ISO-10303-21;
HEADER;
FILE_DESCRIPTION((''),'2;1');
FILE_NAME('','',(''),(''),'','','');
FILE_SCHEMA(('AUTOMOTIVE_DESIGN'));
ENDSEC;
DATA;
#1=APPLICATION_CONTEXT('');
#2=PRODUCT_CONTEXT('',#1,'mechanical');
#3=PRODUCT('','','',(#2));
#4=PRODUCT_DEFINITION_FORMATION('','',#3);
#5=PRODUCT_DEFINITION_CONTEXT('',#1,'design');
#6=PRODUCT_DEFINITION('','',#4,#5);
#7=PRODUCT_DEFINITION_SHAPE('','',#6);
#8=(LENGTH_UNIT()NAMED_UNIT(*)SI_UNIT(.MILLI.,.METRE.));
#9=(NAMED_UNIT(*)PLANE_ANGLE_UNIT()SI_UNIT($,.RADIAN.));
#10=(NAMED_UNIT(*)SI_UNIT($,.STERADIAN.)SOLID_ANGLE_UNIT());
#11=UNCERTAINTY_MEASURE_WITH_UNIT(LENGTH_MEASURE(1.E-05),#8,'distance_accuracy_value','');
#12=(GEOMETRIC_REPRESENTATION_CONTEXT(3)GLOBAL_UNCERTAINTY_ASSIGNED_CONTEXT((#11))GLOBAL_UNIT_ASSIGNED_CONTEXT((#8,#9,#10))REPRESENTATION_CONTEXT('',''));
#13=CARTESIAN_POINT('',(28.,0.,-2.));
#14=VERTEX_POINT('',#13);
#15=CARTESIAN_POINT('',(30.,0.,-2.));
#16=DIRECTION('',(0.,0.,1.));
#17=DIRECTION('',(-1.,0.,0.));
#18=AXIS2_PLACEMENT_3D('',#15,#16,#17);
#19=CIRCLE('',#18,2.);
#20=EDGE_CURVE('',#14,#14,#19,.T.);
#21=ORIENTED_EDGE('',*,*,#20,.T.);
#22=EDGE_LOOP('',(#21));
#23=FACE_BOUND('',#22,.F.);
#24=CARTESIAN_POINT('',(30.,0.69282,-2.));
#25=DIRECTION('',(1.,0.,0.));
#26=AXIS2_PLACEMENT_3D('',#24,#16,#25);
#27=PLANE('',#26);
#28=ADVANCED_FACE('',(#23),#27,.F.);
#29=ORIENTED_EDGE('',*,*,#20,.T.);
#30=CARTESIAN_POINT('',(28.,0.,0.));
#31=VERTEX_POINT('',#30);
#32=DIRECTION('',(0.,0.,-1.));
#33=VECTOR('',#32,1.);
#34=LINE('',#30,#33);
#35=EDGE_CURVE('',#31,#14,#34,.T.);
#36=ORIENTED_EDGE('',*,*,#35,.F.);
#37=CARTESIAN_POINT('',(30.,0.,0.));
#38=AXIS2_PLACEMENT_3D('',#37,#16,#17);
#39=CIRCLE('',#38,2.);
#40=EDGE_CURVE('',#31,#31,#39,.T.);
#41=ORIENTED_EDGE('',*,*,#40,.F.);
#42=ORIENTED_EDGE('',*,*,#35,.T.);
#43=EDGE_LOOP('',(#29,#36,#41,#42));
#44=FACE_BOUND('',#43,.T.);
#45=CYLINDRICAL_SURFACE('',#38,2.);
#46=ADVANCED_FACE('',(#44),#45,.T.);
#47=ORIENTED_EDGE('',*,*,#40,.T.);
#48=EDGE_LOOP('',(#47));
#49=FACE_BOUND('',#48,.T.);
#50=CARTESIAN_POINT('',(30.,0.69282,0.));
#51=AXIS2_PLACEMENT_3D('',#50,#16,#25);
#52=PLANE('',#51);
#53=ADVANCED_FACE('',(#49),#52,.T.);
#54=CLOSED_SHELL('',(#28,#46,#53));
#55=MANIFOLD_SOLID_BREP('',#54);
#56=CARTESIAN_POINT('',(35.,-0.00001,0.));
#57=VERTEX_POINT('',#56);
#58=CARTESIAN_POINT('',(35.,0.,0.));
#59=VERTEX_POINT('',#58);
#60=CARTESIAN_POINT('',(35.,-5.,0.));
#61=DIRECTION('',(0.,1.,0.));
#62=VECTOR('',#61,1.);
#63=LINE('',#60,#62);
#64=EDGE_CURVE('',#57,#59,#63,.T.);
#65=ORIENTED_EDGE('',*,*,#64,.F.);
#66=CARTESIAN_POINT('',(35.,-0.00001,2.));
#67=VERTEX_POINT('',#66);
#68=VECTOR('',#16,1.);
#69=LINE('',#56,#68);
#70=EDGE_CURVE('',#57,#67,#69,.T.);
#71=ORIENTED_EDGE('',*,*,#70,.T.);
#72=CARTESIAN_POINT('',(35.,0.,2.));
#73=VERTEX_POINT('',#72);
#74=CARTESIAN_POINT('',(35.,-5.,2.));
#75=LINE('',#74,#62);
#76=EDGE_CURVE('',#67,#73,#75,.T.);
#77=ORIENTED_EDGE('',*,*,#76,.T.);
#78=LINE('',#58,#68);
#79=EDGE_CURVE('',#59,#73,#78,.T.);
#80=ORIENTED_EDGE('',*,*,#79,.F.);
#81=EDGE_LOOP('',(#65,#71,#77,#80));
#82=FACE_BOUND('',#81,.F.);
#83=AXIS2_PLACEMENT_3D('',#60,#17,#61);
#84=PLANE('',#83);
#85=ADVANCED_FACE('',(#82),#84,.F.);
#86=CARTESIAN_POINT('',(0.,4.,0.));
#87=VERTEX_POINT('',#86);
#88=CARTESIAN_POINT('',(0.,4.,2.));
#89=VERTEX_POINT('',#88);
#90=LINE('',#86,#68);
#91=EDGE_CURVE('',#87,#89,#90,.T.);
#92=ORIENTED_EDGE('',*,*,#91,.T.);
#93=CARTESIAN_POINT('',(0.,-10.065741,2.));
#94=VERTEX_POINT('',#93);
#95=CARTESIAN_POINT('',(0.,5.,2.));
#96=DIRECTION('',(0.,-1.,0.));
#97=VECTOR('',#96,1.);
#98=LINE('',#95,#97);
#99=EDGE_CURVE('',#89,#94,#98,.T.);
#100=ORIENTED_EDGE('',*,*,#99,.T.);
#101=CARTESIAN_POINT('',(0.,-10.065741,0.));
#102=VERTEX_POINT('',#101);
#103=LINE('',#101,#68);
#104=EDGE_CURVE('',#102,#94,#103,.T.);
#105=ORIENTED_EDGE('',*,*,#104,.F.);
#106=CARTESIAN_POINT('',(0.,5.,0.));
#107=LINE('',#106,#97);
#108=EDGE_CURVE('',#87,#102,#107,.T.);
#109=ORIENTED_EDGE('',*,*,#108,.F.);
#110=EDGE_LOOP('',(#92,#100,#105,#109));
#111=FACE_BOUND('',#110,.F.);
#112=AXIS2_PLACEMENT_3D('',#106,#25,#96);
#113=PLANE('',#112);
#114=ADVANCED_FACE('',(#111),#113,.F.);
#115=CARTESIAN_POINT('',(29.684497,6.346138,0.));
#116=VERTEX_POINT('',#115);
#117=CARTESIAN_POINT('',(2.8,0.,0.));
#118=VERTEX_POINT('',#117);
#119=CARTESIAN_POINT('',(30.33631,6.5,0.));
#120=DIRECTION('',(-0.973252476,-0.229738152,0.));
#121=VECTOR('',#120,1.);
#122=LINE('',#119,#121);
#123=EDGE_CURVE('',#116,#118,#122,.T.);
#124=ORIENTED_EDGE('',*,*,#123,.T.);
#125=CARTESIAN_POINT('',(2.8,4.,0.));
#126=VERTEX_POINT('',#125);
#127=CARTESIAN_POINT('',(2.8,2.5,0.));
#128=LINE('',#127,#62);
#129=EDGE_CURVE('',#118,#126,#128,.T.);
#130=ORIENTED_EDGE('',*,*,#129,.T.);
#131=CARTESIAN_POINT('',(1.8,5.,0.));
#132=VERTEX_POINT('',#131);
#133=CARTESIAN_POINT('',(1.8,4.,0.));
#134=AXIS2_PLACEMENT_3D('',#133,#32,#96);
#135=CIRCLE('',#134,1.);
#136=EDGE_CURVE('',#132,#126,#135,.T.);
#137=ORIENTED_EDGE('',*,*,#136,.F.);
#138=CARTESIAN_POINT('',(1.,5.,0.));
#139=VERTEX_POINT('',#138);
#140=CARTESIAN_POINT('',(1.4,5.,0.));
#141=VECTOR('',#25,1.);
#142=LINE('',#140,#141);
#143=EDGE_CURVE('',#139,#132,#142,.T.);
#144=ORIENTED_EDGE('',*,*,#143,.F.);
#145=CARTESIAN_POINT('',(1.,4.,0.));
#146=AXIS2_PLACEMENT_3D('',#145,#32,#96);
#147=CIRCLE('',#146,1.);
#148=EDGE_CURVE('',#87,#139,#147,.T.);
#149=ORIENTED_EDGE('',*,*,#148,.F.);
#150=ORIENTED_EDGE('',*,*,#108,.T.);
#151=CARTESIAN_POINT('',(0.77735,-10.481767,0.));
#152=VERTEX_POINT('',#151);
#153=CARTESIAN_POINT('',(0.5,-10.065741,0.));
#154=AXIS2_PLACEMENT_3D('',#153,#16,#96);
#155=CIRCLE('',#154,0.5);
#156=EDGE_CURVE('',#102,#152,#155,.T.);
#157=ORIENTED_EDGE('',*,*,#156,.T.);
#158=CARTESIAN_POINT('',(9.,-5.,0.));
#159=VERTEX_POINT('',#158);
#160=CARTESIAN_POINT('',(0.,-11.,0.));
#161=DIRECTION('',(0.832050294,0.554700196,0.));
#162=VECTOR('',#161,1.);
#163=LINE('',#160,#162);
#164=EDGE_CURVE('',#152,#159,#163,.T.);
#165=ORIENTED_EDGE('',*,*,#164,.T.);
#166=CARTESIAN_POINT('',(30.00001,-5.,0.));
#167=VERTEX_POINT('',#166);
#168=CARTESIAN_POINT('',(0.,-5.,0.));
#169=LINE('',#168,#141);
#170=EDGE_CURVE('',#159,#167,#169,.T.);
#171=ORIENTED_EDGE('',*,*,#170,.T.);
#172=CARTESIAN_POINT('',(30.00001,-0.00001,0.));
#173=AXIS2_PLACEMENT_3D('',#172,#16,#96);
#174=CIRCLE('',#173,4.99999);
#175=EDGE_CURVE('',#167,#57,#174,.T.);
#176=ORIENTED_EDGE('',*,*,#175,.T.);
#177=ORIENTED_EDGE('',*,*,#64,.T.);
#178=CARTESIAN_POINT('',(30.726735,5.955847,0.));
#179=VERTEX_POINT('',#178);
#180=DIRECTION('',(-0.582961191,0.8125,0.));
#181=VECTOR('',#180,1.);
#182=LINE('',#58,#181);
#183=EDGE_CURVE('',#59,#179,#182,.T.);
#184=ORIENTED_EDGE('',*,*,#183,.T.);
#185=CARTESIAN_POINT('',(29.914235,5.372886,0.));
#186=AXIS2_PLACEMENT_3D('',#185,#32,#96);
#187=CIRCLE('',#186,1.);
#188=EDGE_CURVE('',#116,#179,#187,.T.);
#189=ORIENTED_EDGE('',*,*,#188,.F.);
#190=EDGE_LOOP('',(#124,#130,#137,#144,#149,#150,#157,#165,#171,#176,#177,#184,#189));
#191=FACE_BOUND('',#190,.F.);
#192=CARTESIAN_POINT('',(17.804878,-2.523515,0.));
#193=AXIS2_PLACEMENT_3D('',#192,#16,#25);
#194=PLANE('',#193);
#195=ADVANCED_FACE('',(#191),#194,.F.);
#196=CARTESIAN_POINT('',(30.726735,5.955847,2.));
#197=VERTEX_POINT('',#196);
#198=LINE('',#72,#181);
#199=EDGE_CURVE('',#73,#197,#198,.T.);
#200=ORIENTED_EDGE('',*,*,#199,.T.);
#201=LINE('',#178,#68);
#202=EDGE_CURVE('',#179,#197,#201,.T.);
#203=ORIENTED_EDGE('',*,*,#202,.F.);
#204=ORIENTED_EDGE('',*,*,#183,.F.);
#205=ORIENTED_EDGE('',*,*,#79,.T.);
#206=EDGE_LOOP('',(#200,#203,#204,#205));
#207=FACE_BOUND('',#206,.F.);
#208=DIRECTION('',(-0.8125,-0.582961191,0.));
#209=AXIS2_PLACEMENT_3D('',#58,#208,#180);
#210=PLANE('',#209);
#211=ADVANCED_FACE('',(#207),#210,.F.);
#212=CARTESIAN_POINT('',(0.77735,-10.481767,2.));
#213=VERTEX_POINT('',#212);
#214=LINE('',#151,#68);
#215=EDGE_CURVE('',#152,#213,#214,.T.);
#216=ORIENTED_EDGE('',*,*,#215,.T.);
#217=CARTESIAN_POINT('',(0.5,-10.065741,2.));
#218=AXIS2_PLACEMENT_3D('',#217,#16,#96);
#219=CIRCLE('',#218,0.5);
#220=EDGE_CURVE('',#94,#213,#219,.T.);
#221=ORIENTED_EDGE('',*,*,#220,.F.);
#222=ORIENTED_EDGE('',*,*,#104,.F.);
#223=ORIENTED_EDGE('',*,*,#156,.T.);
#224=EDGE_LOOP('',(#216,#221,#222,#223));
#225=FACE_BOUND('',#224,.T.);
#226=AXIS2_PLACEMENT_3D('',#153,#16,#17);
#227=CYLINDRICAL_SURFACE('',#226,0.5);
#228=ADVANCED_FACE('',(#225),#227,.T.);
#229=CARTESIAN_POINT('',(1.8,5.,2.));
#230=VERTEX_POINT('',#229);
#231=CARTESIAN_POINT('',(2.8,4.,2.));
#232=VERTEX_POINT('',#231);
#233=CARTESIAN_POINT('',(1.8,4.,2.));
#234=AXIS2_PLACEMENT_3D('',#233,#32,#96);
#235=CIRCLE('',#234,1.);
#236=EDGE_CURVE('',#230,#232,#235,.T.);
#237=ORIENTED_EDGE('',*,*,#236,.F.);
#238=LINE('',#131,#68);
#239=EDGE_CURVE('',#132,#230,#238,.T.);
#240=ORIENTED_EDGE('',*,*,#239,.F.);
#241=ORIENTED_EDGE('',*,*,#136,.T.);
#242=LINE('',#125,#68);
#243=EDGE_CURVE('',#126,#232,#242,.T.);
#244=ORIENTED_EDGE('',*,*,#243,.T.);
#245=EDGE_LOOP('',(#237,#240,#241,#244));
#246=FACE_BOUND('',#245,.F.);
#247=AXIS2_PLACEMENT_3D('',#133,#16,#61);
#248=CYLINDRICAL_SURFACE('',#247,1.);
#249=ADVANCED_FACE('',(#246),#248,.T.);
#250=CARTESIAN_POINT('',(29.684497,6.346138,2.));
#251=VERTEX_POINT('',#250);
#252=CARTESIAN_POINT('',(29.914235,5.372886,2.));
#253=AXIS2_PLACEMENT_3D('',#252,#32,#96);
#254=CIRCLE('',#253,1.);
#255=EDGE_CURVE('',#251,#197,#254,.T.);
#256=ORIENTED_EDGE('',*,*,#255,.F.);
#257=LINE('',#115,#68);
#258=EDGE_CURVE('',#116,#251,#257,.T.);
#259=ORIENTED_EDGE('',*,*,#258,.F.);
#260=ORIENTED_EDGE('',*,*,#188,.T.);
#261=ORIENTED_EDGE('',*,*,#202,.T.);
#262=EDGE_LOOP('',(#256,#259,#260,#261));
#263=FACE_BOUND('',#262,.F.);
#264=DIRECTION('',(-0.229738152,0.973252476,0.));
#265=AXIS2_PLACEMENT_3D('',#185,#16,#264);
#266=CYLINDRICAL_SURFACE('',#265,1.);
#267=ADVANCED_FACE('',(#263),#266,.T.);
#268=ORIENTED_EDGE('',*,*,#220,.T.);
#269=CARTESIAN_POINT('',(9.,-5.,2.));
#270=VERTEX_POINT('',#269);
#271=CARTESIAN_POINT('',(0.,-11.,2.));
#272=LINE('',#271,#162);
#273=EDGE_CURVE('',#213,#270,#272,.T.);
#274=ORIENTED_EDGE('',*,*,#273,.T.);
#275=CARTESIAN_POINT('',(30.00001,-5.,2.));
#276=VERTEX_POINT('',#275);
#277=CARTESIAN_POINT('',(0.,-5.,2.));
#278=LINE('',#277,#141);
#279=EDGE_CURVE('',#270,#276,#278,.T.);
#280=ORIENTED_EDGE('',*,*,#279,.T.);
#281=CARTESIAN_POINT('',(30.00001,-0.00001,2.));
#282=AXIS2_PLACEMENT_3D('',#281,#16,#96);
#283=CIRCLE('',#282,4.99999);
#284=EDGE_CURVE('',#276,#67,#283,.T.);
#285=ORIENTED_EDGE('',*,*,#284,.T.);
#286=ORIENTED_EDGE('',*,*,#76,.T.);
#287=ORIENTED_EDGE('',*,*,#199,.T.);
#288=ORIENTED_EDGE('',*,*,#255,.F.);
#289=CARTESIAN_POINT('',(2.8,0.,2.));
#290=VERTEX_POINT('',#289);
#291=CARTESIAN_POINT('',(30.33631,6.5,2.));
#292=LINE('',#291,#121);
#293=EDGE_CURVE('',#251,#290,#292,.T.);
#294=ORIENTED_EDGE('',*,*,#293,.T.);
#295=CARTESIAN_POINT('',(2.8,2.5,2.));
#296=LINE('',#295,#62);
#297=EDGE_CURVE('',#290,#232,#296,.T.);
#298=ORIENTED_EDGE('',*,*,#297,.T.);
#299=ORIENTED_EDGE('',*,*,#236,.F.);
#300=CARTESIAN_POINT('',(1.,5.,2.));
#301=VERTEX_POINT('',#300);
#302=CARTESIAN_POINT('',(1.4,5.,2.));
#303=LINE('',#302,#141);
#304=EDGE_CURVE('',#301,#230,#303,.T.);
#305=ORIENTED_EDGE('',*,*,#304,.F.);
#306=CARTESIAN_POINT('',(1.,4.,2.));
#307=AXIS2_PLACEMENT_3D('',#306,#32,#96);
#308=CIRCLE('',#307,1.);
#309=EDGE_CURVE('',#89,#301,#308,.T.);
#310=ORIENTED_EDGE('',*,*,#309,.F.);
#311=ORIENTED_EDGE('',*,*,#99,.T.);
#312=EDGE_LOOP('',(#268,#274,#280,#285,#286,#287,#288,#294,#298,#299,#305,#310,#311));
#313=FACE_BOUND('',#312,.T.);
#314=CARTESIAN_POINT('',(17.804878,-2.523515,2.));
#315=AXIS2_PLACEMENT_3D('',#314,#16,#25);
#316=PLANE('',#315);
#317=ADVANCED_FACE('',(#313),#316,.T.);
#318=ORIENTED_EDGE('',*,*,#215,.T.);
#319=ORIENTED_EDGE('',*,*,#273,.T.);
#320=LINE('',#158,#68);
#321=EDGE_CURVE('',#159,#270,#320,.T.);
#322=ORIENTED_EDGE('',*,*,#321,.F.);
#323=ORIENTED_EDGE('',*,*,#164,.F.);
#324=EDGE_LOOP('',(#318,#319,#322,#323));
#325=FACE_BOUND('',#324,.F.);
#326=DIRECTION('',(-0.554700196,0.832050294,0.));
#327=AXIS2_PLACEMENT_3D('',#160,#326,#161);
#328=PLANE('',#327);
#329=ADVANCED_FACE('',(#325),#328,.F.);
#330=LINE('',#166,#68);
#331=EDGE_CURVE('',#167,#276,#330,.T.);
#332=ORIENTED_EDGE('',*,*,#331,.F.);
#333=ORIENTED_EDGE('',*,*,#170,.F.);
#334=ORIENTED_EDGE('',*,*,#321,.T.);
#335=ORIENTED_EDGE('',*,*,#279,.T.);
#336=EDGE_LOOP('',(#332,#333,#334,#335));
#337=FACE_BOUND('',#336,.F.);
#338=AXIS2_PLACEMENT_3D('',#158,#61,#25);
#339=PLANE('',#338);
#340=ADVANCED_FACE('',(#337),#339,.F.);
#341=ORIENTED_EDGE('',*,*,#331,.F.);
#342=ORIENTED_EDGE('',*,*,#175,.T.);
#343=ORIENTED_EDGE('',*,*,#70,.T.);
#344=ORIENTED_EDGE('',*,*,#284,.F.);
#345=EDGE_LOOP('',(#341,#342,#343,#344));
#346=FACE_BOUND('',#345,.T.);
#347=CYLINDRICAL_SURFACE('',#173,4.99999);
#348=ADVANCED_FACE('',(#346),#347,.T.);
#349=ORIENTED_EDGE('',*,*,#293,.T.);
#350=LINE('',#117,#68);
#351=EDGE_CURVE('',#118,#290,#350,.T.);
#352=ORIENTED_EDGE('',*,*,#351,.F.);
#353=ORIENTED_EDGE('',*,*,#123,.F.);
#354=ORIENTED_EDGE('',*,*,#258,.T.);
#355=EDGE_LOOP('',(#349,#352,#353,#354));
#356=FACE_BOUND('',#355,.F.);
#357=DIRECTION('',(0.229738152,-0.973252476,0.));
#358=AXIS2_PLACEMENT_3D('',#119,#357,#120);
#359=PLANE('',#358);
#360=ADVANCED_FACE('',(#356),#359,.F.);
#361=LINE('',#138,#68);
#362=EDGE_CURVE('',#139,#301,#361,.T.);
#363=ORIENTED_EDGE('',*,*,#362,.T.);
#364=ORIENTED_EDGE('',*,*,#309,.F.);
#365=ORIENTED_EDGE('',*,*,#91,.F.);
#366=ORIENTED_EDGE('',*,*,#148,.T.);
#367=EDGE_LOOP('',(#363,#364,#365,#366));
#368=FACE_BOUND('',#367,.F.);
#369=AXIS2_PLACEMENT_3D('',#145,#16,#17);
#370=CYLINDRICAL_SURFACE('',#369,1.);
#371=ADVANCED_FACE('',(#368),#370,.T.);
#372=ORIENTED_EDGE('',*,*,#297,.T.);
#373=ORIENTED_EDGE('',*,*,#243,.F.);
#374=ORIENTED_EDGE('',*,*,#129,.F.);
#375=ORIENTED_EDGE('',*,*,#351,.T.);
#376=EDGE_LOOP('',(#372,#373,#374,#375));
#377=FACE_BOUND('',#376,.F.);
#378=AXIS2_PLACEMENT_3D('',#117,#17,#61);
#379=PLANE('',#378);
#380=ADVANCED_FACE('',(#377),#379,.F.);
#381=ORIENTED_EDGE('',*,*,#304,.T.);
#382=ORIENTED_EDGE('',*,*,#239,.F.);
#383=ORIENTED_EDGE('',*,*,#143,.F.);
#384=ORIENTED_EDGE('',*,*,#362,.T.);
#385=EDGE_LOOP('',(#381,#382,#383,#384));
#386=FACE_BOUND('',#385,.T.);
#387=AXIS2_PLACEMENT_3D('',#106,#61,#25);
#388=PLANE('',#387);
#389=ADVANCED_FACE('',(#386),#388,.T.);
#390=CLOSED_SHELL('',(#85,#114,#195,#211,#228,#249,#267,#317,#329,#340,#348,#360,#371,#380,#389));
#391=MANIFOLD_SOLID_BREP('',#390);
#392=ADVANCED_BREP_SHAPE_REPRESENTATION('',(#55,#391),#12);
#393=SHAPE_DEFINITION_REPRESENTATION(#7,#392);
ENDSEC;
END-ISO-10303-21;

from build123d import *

# Parameters (mm, degrees)
F0_W     = 2.8
F0_H     = 5
F1_DEPTH = 2
F2_DEPTH = 2
F3_R     = 4.99999
F4_R     = 1
F5_R     = 1
F6_R     = 0.5


# Not quite as in the source:
# - a fillet or chamfer is up to 0.001 mm smaller than in the source, because OpenCascade refuses the exact size


with BuildPart() as f1:
    # F0 (on Top) → F1 (new body)
    with BuildSketch(Plane.XY):
        with BuildLine():
            Line((2.8, 0), (0, 0))
            Line((0, 0), (0, -5))
            Line((0, -5), (9, -5))
            Line((9, -5), (35, -5))
            Line((35, -5), (35, 0))
            Line((35, 0), (32, 0))
            ThreePointArc((32, 0), (30, -2), (28, 0))
            Line((28, 0), (2.8, 0))
        make_face()
        Polygon((9, -5), (0, -5), (0, -11), align=None)
        with BuildLine():
            Line((30.3363104735, 6.5), (2.8, 0))
            Line((2.8, 0), (28, 0))
            ThreePointArc((28, 0), (30, 2), (32, 0))
            Line((32, 0), (35, 0))
            Line((35, 0), (30.3363104735, 6.5))
        make_face()
        with Locations((1.4, 2.5)):
            Rectangle(F0_W, F0_H)
        with BuildLine():
            ThreePointArc((32, 0), (30, 2), (28, 0))
            Line((28, 0), (32, 0))
        make_face()
        with BuildLine():
            Line((32, 0), (28, 0))
            ThreePointArc((28, 0), (30, -2), (32, 0))
        make_face()
    extrude(amount=F1_DEPTH)

    # F3 (radius 5 in the source; OpenCascade refuses exactly that, so slightly less here)
    f3_edges = [f1.edges().sort_by_distance(p)[0] for p in [
        (35, -5, 1),
    ]]
    fillet(f3_edges, radius=F3_R)

    # F4
    f4_edges = [f1.edges().sort_by_distance(p)[0] for p in [
        (0, 5, 1),
        (2.8, 5, 1),
    ]]
    fillet(f4_edges, radius=F4_R)

    # F5
    f5_edges = [f1.edges().sort_by_distance(p)[0] for p in [
        (30.33631, 6.5, 1),
    ]]
    fillet(f5_edges, radius=F5_R)

    # F6
    f6_edges = [f1.edges().sort_by_distance(p)[0] for p in [
        (0, -11, 1),
    ]]
    fillet(f6_edges, radius=F6_R)


with BuildPart() as f2:
    # F0 (on Top) → F2 (new body)
    with BuildSketch(Plane.XY):
        with BuildLine():
            ThreePointArc((32, 0), (30, 2), (28, 0))
            Line((28, 0), (32, 0))
        make_face()
        with BuildLine():
            Line((32, 0), (28, 0))
            ThreePointArc((28, 0), (30, -2), (32, 0))
        make_face()
    extrude(amount=-F2_DEPTH)


solid = Compound([f1.part, f2.part])
